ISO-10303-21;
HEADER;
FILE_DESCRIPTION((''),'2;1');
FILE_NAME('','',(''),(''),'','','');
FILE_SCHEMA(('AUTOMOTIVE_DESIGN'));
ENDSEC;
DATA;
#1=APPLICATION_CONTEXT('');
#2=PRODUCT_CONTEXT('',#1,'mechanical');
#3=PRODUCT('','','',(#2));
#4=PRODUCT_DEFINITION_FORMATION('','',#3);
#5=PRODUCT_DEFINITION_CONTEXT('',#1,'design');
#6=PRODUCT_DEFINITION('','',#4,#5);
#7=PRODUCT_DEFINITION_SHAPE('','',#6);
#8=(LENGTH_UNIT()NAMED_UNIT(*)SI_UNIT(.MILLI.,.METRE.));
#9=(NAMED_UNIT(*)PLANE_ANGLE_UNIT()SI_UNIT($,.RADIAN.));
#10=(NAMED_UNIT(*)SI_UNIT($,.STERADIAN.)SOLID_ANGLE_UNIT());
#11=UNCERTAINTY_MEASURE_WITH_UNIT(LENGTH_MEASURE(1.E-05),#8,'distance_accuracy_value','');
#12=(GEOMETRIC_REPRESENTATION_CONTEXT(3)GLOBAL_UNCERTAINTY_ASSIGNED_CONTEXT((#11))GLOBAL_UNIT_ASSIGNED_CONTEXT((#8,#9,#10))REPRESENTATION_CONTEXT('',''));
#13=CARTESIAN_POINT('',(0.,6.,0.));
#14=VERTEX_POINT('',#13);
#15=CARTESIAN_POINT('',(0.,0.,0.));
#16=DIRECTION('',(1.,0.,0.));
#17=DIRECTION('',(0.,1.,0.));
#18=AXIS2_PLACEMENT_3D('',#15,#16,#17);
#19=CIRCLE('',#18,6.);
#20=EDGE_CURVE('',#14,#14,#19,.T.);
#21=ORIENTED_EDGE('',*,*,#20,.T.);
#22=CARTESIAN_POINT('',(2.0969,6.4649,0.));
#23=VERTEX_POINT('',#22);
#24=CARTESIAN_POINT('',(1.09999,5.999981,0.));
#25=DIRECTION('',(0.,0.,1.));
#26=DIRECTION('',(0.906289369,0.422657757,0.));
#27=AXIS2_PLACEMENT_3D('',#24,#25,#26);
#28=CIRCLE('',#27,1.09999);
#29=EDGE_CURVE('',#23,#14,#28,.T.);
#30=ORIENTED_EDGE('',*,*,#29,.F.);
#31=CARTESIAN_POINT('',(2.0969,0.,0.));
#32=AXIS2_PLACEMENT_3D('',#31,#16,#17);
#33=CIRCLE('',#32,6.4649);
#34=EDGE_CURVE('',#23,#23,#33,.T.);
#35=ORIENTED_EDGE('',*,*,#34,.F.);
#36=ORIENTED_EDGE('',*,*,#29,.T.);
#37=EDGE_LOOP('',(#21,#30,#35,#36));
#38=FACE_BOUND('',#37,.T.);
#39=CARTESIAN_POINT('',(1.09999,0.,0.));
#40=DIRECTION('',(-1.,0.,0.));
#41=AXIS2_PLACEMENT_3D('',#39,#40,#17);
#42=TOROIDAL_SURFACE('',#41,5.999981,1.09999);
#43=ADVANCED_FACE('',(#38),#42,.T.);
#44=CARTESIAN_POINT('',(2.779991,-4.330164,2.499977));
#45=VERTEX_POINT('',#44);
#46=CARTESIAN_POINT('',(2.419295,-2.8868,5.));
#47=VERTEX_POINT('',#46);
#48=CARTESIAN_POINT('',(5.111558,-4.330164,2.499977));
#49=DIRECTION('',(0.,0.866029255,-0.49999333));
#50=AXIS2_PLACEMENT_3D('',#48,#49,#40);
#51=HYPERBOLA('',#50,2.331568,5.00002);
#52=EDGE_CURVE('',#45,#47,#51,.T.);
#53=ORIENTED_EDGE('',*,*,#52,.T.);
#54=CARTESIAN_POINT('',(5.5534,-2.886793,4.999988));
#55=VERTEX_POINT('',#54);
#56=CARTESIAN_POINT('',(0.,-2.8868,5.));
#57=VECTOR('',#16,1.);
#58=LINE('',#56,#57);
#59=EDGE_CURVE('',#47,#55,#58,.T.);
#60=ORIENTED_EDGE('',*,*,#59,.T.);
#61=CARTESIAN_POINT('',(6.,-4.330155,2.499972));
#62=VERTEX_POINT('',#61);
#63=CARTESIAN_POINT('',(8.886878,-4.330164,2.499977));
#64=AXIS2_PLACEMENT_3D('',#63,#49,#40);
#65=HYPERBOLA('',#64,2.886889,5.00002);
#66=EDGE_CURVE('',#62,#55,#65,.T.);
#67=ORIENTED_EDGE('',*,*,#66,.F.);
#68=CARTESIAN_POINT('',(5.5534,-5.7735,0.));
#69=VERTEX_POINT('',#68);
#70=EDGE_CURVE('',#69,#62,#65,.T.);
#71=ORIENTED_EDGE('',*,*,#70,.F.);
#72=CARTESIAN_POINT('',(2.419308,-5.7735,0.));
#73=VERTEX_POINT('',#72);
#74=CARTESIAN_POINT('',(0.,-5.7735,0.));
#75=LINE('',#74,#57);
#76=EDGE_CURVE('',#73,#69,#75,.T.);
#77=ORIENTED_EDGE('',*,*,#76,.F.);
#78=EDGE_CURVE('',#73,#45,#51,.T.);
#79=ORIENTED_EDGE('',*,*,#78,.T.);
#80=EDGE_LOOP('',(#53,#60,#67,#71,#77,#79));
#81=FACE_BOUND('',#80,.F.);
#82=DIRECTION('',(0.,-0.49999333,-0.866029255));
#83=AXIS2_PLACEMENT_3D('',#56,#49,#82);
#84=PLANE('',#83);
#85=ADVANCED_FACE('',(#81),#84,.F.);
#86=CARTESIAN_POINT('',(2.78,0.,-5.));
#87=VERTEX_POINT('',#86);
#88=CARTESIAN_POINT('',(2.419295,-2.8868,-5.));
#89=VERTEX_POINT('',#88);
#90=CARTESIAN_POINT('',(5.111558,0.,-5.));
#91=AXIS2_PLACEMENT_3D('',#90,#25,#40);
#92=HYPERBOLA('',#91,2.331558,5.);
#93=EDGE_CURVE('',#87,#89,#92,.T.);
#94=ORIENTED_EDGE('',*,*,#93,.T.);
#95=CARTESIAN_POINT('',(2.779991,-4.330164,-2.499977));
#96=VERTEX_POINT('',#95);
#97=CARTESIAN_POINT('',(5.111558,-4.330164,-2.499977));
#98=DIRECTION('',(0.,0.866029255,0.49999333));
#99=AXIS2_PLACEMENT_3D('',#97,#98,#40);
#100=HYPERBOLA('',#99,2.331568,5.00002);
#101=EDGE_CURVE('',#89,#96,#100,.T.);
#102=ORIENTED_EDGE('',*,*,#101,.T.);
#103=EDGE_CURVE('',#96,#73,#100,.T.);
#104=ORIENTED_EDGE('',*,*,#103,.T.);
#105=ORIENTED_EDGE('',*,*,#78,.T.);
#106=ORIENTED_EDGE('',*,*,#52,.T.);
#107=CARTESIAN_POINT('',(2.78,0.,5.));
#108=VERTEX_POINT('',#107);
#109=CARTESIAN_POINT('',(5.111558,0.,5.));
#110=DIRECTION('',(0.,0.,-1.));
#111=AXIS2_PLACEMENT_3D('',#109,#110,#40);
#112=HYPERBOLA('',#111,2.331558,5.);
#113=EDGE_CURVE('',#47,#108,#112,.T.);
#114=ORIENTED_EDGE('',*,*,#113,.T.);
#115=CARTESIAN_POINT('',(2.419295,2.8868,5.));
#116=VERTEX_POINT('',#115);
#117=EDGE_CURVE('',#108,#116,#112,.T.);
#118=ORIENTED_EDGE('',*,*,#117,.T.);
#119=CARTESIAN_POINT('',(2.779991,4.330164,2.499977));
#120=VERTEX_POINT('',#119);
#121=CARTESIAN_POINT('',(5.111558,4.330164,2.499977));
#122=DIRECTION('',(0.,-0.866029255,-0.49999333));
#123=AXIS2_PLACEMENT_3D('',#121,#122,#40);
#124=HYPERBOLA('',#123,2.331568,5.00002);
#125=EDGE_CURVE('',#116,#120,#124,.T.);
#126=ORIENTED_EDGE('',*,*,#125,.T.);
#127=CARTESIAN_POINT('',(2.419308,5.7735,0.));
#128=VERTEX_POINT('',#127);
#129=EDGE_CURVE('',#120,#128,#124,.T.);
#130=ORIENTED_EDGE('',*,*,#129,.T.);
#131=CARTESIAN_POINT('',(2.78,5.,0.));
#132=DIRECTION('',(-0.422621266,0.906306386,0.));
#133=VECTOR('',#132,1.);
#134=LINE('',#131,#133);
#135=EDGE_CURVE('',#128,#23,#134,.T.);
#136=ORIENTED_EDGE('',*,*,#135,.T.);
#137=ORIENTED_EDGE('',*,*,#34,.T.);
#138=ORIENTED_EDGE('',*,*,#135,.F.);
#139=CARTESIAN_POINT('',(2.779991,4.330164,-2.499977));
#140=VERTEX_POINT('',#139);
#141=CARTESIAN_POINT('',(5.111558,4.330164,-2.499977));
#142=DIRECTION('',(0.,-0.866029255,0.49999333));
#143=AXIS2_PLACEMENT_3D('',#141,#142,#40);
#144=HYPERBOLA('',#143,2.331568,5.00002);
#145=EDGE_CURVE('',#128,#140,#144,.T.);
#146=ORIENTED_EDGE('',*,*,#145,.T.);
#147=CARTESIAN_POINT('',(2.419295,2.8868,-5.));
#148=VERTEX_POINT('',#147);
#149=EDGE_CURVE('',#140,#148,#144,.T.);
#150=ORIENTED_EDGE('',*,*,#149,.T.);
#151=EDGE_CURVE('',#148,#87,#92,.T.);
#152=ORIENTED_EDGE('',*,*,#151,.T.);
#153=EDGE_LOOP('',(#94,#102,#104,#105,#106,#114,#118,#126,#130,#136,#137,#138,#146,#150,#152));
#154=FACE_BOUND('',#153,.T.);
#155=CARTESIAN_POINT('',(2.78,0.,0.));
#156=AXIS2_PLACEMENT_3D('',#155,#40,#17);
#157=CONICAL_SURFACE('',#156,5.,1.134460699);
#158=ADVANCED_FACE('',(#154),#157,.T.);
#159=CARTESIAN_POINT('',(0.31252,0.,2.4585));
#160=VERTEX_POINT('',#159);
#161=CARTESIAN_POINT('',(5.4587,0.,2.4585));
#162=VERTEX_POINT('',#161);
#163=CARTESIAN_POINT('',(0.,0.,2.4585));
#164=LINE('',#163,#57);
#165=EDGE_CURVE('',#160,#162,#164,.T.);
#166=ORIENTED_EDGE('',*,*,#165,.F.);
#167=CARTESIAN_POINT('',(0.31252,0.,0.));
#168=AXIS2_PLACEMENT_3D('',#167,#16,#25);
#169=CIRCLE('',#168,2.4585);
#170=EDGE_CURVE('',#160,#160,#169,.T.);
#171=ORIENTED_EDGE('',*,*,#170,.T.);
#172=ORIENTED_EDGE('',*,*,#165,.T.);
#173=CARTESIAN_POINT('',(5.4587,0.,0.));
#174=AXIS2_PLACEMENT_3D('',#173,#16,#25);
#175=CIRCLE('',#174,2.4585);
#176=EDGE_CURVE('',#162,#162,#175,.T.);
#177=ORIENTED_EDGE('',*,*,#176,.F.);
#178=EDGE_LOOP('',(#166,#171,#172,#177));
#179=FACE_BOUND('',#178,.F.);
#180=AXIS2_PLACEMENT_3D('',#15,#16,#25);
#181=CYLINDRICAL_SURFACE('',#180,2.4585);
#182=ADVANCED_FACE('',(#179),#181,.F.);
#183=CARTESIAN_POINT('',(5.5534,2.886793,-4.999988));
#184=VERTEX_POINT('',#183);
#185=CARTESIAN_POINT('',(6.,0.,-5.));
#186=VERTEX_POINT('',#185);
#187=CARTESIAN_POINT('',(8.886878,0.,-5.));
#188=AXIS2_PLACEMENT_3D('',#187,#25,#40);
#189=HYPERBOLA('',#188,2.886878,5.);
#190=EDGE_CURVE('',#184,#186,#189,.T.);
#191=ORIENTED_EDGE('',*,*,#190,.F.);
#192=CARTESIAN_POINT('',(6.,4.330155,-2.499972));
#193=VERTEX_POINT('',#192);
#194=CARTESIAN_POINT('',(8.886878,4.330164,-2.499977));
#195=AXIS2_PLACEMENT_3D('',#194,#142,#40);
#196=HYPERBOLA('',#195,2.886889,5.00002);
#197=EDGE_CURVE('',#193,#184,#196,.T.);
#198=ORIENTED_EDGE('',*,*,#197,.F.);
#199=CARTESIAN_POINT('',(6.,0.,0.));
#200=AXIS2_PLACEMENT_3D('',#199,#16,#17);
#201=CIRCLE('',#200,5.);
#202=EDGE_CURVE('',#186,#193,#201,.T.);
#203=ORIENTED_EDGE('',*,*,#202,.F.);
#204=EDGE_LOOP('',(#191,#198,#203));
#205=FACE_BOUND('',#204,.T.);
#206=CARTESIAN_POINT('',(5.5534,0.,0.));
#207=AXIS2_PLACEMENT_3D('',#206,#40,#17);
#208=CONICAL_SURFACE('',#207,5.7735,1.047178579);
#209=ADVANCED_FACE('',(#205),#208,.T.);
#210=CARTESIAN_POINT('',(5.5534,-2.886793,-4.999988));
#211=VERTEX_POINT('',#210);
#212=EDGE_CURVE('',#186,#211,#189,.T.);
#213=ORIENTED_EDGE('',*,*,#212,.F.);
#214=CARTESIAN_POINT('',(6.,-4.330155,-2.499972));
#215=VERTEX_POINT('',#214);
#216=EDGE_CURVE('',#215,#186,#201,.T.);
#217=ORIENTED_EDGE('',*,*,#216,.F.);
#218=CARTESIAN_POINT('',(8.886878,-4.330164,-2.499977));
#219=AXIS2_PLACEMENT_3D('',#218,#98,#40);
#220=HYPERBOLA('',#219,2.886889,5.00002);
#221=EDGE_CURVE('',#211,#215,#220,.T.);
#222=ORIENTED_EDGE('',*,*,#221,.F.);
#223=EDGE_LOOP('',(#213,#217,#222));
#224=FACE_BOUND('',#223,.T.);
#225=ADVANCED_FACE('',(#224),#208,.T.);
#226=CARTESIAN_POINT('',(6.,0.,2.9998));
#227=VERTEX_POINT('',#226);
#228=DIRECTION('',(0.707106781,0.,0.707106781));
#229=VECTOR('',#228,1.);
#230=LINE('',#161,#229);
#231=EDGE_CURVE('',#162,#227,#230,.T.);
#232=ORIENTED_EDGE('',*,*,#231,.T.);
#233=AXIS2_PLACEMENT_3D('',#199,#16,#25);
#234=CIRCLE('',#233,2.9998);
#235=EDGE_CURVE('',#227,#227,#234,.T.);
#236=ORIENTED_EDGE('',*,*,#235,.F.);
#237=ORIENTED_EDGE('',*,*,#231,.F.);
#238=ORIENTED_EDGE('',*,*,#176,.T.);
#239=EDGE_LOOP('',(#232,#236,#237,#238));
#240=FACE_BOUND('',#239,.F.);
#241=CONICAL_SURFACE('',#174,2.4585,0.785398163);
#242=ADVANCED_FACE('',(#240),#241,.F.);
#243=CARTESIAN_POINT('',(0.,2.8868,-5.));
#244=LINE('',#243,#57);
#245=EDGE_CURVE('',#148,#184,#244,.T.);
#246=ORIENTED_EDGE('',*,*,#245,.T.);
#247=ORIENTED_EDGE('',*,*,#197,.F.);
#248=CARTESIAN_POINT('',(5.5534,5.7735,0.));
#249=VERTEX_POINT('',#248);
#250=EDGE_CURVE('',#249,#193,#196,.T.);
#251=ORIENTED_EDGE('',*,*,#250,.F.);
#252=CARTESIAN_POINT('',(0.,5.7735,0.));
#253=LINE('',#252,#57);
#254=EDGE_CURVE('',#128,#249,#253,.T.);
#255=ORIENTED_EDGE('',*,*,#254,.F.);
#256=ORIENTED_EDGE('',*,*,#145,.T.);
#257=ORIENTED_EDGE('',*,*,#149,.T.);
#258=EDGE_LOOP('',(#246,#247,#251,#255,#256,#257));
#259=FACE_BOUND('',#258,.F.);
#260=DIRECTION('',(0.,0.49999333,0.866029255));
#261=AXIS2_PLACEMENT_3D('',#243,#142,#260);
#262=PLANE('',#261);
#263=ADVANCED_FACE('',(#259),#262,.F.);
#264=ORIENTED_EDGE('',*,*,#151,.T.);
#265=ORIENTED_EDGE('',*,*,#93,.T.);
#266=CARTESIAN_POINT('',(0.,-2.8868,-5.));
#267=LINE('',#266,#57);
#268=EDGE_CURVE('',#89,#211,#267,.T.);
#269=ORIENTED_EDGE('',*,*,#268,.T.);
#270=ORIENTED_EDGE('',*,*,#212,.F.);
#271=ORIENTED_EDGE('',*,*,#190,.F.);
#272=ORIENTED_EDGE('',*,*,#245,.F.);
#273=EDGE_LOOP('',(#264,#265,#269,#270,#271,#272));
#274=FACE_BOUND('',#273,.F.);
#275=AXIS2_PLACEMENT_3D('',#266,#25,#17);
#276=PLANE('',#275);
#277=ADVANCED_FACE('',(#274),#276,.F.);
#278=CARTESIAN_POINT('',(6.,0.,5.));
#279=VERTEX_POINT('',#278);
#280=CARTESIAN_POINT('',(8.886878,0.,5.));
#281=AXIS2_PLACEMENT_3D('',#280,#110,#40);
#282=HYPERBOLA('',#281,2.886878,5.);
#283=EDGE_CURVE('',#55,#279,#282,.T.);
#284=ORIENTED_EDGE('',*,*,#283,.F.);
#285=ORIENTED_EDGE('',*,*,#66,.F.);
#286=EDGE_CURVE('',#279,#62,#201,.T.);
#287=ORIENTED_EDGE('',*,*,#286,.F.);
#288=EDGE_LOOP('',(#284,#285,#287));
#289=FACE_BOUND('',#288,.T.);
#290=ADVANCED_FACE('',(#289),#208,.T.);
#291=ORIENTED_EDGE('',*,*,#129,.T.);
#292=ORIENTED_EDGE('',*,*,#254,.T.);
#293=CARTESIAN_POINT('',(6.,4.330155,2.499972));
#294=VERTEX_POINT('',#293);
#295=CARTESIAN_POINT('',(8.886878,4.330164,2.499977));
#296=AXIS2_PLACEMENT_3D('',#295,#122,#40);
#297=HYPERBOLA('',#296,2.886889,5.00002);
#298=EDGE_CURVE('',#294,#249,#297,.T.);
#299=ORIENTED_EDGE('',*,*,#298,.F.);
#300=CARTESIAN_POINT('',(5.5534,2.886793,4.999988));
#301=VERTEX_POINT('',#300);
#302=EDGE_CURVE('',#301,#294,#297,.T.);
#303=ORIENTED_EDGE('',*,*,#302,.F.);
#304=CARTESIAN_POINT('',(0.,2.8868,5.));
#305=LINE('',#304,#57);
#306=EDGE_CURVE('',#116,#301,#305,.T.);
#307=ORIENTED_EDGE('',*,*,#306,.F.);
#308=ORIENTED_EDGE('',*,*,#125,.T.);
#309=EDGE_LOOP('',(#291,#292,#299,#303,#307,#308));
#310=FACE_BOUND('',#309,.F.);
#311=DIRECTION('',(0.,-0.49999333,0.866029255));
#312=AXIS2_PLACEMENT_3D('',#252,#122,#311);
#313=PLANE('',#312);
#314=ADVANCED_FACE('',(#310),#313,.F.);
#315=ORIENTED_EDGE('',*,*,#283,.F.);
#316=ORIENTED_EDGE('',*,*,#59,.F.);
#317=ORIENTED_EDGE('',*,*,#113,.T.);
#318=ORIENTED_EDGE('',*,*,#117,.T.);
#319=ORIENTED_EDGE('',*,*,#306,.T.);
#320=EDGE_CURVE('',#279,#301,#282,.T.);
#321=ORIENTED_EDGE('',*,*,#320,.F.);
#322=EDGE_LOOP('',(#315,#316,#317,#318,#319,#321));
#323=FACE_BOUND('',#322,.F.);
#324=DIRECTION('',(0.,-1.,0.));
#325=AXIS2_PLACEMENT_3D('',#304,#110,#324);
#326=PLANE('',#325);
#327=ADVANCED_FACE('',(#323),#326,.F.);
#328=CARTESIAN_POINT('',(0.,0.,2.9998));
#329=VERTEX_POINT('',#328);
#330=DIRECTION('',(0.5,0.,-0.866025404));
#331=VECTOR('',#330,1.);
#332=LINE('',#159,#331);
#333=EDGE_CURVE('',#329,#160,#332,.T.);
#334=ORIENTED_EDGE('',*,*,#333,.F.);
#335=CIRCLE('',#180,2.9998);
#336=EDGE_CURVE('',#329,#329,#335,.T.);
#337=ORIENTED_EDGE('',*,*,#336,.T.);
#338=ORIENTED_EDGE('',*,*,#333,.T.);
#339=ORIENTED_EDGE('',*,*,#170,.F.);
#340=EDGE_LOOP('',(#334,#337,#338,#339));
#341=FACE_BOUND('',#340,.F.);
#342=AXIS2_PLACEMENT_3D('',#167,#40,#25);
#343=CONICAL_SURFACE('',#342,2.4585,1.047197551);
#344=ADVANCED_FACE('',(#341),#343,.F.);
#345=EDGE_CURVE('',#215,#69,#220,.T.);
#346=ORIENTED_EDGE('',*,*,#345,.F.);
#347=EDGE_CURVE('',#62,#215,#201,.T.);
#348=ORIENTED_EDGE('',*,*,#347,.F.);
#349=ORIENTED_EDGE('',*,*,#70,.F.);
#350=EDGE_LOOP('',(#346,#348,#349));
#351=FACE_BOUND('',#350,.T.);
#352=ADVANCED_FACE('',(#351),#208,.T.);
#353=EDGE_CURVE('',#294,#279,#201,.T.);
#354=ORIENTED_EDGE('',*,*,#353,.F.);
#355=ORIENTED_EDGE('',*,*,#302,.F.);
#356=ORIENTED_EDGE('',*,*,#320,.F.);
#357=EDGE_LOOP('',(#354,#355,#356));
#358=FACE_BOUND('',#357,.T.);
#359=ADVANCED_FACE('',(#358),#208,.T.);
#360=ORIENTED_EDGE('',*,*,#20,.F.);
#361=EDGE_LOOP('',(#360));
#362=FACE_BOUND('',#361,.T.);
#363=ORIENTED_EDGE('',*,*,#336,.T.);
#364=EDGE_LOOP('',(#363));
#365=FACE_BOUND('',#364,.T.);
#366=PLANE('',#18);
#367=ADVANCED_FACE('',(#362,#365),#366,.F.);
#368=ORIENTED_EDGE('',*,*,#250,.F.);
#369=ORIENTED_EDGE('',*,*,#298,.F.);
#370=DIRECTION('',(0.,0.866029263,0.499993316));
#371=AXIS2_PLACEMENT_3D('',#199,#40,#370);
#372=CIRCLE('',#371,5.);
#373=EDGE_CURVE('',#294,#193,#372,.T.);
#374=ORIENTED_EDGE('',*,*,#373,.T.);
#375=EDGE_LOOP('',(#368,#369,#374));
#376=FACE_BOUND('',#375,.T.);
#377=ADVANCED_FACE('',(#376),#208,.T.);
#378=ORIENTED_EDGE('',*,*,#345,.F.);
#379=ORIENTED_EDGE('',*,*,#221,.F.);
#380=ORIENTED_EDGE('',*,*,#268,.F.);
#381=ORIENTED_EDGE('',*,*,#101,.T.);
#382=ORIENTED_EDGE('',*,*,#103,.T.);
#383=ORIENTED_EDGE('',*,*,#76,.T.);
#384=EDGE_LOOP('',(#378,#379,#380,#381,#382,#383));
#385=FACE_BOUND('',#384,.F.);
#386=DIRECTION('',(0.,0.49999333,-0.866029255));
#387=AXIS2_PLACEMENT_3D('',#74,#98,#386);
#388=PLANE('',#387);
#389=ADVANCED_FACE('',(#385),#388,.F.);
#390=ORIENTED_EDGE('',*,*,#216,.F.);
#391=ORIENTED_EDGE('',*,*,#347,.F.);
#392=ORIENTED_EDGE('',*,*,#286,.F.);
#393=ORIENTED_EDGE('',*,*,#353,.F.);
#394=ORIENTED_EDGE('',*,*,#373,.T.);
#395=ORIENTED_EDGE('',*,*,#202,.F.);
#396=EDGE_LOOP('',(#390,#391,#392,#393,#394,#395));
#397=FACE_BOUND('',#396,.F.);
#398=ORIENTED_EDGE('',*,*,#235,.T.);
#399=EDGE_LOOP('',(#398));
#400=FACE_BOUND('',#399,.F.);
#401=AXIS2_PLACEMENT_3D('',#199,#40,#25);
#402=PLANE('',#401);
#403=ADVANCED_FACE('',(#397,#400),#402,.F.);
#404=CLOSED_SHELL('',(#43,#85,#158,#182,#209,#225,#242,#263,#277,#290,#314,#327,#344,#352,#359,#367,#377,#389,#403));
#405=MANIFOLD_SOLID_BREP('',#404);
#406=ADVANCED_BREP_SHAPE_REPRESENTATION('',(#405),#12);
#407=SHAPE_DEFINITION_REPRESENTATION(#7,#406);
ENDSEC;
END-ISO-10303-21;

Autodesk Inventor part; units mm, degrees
ref_plane "YZ Plane" through (0, 0, 0) normal (1, 0, 0) x (0, 1, 0)
ref_plane "XZ Plane" through (0, 0, 0) normal (0, 1, 0) x (-1, 0, 0)
sketch "Sketch1" plane through (0, 0, 0) normal (0, 0, 1) x (1, 0, 0)
  line L0 (-1.4239, 0) -> (7.2373, 0) projected
  line L1 (2.78, 5) -> (2.0969, 6.4649)
  line L2 (2.78, 5) -> (6, 5) construction
  line L3 (6, 5) -> (6, 0) construction
  arc A0 (2.0969, 6.4649) -> (0, 6) centre (1.1, 6) ccw
  line L4 (2.78, 5) -> (2.78, 0)
  line L5 (0, -1.4613) -> (0, 8.7676) projected
  point P0 (0, 0)
  dimension "d2" = 10
  dimension "d4" = 14.2
  dimension "d5" = 1.1
  dimension "d15" = 6
  dimension "d16" = 25
revolve "Ring" add sketch "Sketch1" angle 360 about axis through (-10, 0, 0) along (1, 0, 0)
sketch "Sketch2" plane through (0, 0, 0) normal (-1, 0, 0) x (0, 0, 1)
  circle A0 centre (0, 0) radius 4.9
  line L0 (-5, -2.8868) -> (-5, 2.8868)
  line L1 (-5, 2.8868) -> (0, 5.7735)
  line L2 (0, 5.7735) -> (5, 2.8868)
  line L3 (5, 2.8868) -> (5, -2.8868)
  line L4 (5, -2.8868) -> (0, -5.7735)
  line L5 (0, -5.7735) -> (-5, -2.8868)
  circle A1 centre (0, 0) radius 6 projected
  dimension "d6" = 11.547
extrude "Body" add sketch "Sketch2" against normal blind 6 contours A0 | L0 L1 L2 L3 L4 L5
sketch "Sketch3" plane through (0, 0, 0) normal (0, 0, 1) x (1, 0, 0)
  line L0 (2.4193, 5.7735) -> (6, 5.7735) projected
  line L1 (6, 2.8868) -> (6, 5.7735) projected
  line L2 (0, -6) -> (0, 6) projected
  line L3 (-1.2, 0) -> (7.2, 0) projected
  line L4 (5.5534, 5.7735) -> (6, 5)
  dimension "d10" = 30
  dimension "d11" = 10
revolve "Chamfer1" cut sketch "Sketch3" angle 360 about axis through (-10, 0, 0) along (1, 0, 0)
sketch "Sketch4" plane through (0, 0, 0) normal (-1, 0, 0) x (0, 0, 1)
  circle A0 centre (0, 0) radius 6 projected
hole "Thread" at (0, 0, 0) direction (1, 0, 0) diameter 4.917 end through all thread size "M6x1" class "6H" standard "ISO Metric profile"
chamfer "Chamfer2" distance 0.5413 angle 30 1 edges at (0, 0, -2.4585) measured on face at (0, 4.7554, -0.5774)
ref_plane "Work Plane1" through (20.959, 0, 0) normal (0, 0, -1) x (-1, 0, 0)
chamfer "Chamfer3" distance 0.5413 angle 45 1 edges at (6, 0, -2.4585)
equation "\"d6\" = 1.1547 * SW"
equation "\"d7\" = KOH"
equation "\"d12\" = -0.5 * GD1 + 0.5 * NND"
equation "\"d46\" = -0.5 * GD1 + 0.5 * NND"
equation "\"d51\" = -0.5 * GD1 + 0.5 * NND"
equation "\"d2\" = SW"
equation "\"d4\" = LADI"
equation "\"d5\" = PHH"
equation "\"d15\" = KOH"
equation "\"d16\" = KEWI"
equation "\"d10\" = ANG1"
equation "\"d11\" = SW0"
equation "\"ANG1\" = 30deg"
equation "\"KEWI\" = 25deg"
equation "\"NND\" = 6"
equation "\"LADI\" = 14.2"
equation "\"SW\" = 10"
equation "\"PHH\" = 1.1"
equation "\"KOH\" = NND"
equation "\"SW0\" = 10"
equation "\"d1\" = LADI"
equation "\"d3\" = PHH"
equation "\"GUL\" = 0.541266 * PTC"
equation "\"RR\" = PHH"
equation "\"THREADDIA\" = 6"
equation "\"TOA\" = 30deg"
equation "\"PTC\" = 1"
equation "\"GAL\" = 0.541266 * PTC"
equation "\"E0\" = 1.155 * SW"
equation "\"GD1\" = 4.917468"
properties part number "ISO 4161 - M6" material "Stainless Steel"
